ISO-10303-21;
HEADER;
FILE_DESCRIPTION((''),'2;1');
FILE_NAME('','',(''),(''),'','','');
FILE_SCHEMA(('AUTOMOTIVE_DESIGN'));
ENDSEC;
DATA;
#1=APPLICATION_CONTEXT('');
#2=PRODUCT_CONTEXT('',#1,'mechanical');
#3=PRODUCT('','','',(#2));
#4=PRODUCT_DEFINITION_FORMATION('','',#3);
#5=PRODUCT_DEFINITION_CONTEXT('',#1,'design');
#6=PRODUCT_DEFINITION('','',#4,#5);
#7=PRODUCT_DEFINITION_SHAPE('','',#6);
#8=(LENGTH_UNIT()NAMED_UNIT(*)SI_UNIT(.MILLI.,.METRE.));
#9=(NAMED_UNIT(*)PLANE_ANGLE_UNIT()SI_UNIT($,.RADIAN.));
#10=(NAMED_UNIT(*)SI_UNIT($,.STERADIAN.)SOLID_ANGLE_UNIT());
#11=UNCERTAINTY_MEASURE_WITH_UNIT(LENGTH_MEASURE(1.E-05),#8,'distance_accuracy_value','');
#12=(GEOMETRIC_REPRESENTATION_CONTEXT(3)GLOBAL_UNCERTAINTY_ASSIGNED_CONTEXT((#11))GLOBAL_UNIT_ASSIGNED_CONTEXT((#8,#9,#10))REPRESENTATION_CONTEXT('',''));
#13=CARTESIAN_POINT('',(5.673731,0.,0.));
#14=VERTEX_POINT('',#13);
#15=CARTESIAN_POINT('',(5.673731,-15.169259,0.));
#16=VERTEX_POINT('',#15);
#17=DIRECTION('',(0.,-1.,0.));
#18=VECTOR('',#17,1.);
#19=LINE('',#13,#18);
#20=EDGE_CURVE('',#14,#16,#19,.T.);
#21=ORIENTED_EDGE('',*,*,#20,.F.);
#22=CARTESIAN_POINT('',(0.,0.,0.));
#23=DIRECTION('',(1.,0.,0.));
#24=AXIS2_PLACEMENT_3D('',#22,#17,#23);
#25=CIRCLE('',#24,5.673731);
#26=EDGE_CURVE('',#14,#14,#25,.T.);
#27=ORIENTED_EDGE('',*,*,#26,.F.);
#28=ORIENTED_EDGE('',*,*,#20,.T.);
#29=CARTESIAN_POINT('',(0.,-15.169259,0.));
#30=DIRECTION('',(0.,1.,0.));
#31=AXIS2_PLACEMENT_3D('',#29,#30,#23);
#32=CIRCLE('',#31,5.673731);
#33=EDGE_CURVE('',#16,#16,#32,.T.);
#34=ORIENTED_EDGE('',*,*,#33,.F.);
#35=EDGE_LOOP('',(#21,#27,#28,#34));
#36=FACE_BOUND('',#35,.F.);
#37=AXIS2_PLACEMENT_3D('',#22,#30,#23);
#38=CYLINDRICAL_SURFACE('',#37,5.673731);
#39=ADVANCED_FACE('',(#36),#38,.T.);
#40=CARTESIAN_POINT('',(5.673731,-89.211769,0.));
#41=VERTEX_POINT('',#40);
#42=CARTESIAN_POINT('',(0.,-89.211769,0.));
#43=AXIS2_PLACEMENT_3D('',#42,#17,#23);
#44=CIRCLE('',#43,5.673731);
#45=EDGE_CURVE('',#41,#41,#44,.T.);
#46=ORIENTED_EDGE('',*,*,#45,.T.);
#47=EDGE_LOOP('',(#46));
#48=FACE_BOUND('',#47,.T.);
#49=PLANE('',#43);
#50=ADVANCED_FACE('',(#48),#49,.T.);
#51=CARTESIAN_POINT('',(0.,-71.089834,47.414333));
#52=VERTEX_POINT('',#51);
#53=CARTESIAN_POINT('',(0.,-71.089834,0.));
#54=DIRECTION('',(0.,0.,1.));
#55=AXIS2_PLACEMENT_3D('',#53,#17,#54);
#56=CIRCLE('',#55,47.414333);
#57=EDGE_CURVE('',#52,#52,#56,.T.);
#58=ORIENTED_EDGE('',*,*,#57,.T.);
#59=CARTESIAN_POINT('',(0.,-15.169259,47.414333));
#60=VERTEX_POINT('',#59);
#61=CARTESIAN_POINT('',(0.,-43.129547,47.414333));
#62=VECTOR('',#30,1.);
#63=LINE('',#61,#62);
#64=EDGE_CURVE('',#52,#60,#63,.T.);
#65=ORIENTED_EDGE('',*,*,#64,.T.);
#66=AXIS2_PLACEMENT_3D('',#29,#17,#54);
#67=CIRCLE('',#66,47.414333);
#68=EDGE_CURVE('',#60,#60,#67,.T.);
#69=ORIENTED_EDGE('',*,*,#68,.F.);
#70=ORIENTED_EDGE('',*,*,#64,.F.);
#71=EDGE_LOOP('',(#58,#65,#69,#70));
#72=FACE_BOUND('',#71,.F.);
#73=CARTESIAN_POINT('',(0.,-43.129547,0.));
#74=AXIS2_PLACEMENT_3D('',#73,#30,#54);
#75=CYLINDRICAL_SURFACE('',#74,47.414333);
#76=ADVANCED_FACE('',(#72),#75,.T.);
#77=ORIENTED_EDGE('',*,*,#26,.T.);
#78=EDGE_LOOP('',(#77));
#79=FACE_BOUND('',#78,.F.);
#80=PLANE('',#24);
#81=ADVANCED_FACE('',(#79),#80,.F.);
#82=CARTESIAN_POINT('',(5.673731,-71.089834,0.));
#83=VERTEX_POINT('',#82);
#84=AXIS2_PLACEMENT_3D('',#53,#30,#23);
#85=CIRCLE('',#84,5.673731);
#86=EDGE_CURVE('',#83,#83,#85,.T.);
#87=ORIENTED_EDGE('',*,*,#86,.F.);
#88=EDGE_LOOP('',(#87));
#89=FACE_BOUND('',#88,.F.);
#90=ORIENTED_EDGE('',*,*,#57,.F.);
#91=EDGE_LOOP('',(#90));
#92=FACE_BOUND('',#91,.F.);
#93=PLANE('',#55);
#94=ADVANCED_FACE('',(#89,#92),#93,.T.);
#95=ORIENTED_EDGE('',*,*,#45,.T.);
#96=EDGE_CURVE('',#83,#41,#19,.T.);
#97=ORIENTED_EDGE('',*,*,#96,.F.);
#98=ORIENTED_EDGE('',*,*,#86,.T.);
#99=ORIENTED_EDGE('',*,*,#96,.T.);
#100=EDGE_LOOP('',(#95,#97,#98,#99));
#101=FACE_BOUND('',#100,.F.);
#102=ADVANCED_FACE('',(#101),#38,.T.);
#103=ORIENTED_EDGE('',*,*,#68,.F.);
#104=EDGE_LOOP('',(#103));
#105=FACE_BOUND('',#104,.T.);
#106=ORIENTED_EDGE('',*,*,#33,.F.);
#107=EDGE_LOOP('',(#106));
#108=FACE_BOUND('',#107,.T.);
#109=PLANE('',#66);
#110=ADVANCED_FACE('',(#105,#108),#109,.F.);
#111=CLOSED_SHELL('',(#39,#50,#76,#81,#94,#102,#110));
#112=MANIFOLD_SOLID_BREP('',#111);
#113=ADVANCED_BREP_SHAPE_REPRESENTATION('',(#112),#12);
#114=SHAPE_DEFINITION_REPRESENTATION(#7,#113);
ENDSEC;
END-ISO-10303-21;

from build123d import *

# Parameters (mm, degrees)
F0_W         = 152.3266881704
F0_H         = 76.2925669551
F1_DEPTH     = 44.45
F2_T         = -2.54
F3_W         = 18.5941308737
F3_H         = 8.1849619746
F4_DEPTH     = 38.1
F5_T         = 2.54
F5_T3_DEPTH  = 13.2649619746
F5_T5_DEPTH  = 23.6741308737
F5_T7_DEPTH  = 78.8325669551
F5_T9_DEPTH  = 44.45
F5_T11_DEPTH = 152.3266881704
F7_R         = 5.6737308036
F8_DEPTH     = 89.211769402
F9_W         = 55.9205748141
F9_H         = 47.4143326283


# Not quite as in the source:
# - a shell that OpenCascade refuses in one call is made with other operations: the cavity is built on its own and cut out


with BuildPart() as f1:
    # F0 (on Front) → F1 (new body)
    with BuildSketch(Plane.XZ):
        with Locations((0.0222995877, 38.1462834775)):
            Rectangle(F0_W, F0_H)
    extrude(amount=F1_DEPTH)

    # F2
    f2_openings = [f1.faces().sort_by_distance(p)[0] for p in [
        (0.0223, -22.225, 0),
    ]]
    offset(amount=F2_T, openings=f2_openings)

    # F3 (on face) → F4 (join)
    with BuildSketch(Plane(origin=(-76.1410444975, 0, 0), x_dir=(0, -1, 0), z_dir=(-1, 0, 0))):
        with Locations((25.1720361412, 52.4518452585)):
            Rectangle(F3_W, F3_H)
    extrude(amount=F4_DEPTH)

    # F5: shell of thickness 2.54, made by hand


with BuildPart() as f5_core1:
    # F5_t2: copy of F1
    add(f1.part)

    # the walls: a layer under each face that stays
    f5_faces = [f5_core1.faces().sort_by_distance(p)[0] for p in [
        (0.0222995877, -22.225, 76.2925669551),
        (76.1856436729, -22.225, 38.1462834775),
        (-76.1410444975, -22.225, 38.1462834775),
        (0.0222995877, 0, 38.1462834775),
        (0.0222995877, -44.45, 38.1462834775),
        (-71.0634882251, -42.9683333333, 0),
        (-95.1910444975, -34.469101578, 52.4518452585),
        (-95.1910444975, -25.1720361412, 48.3593642712),
        (-95.1910444975, -15.8749707043, 52.4518452585),
        (-73.6010444975, -22.225, 36.8762834775),
        (0.0222995877, -2.54, 36.8762834775),
        (73.6456436729, -22.225, 36.8762834775),
        (0.0222995877, -41.91, 36.8762834775),
        (0.0222995877, -22.225, 73.7525669551),
    ]]
    thicken(f5_faces, amount=-F5_T, mode=Mode.SUBTRACT)

    # F5_s4 → F5_t3 (cut)
    with BuildSketch(Plane.XY.offset(45.8193642712)):
        Polygon((-76.1664444975, -34.494501578), (-73.6010444975, -34.469101578), (-73.6010444975, -31.929101578), (-76.1410444975, -31.929101578), align=None)
        Polygon((-76.1664444975, -15.8495707043), (-73.6010444975, -15.8749707043), (-73.6010444975, -18.4149707043), (-76.1410444975, -18.4149707043), align=None)
    extrude(amount=F5_T3_DEPTH, mode=Mode.SUBTRACT)

    # F5_s6 → F5_t5 (cut)
    with BuildSketch(Plane.XZ.offset(13.3349707043)):
        Polygon((-76.1664444975, 48.3339642712), (-73.6010444975, 48.3593642712), (-73.6010444975, 50.8993642712), (-76.1410444975, 50.8993642712), align=None)
    extrude(amount=F5_T5_DEPTH, mode=Mode.SUBTRACT)

    # F5_s8 → F5_t7 (cut)
    with BuildSketch(Plane.XY.offset(-2.54)):
        Polygon((-73.5756444975, -2.5654), (-76.1410444975, -2.54), (-76.1410444975, 0), (-73.6010444975, 0), align=None)
        Polygon((-73.5756444975, -41.8846), (-76.1410444975, -41.91), (-76.1410444975, -44.45), (-73.6010444975, -44.45), align=None)
        Polygon((73.6202436729, -2.5654), (73.6456436729, 0), (76.1856436729, 0), (76.1856436729, -2.54), align=None)
        Polygon((73.6202436729, -41.8846), (76.1856436729, -41.91), (76.1856436729, -44.45), (73.6456436729, -44.45), align=None)
    extrude(amount=F5_T7_DEPTH, mode=Mode.SUBTRACT)

    # F5_s10 → F5_t9 (cut)
    with BuildSketch(Plane.XZ):
        Polygon((-73.5756444975, 73.7271669551), (-76.1410444975, 73.7525669551), (-76.1410444975, 76.2925669551), (-73.6010444975, 76.2925669551), align=None)
        Polygon((73.6202436729, 73.7271669551), (76.1856436729, 73.7525669551), (76.1856436729, 76.2925669551), (73.6456436729, 76.2925669551), align=None)
    extrude(amount=F5_T9_DEPTH, mode=Mode.SUBTRACT)

    # F5_s12 → F5_t11 (cut)
    with BuildSketch(Plane.YZ.offset(-76.1410444975)):
        Polygon((-2.5654, 73.7271669551), (0, 73.7525669551), (0, 76.2925669551), (-2.54, 76.2925669551), align=None)
        Polygon((-41.8846, 73.7271669551), (-44.45, 73.7525669551), (-44.45, 76.2925669551), (-41.91, 76.2925669551), align=None)
    extrude(amount=F5_T11_DEPTH, mode=Mode.SUBTRACT)


with BuildPart() as f1_1:
    add(f1.part)

    # what is left inside the walls is the cavity
    f5_cavity = [f5_core1.part.solids().sort_by_distance(p)[0] for p in [
        (-101.541044, -25.172036, 56.518926),
    ]]
    add(f5_cavity, mode=Mode.SUBTRACT)


with BuildPart() as f8:
    # F7 (on Front) → F8 (new body)
    with BuildSketch(Plane.XZ):
        Circle(F7_R)
    extrude(amount=F8_DEPTH)

    # F9 (on Right) → F10 (revolve)
    with BuildSketch(Plane.YZ):
        with Locations((-43.1295465678, 23.7071663141)):
            Rectangle(F9_W, F9_H)
    revolve(axis=Axis((0, -43.1295465678, 0), (0, -1, 0)))


solid = f8.part
